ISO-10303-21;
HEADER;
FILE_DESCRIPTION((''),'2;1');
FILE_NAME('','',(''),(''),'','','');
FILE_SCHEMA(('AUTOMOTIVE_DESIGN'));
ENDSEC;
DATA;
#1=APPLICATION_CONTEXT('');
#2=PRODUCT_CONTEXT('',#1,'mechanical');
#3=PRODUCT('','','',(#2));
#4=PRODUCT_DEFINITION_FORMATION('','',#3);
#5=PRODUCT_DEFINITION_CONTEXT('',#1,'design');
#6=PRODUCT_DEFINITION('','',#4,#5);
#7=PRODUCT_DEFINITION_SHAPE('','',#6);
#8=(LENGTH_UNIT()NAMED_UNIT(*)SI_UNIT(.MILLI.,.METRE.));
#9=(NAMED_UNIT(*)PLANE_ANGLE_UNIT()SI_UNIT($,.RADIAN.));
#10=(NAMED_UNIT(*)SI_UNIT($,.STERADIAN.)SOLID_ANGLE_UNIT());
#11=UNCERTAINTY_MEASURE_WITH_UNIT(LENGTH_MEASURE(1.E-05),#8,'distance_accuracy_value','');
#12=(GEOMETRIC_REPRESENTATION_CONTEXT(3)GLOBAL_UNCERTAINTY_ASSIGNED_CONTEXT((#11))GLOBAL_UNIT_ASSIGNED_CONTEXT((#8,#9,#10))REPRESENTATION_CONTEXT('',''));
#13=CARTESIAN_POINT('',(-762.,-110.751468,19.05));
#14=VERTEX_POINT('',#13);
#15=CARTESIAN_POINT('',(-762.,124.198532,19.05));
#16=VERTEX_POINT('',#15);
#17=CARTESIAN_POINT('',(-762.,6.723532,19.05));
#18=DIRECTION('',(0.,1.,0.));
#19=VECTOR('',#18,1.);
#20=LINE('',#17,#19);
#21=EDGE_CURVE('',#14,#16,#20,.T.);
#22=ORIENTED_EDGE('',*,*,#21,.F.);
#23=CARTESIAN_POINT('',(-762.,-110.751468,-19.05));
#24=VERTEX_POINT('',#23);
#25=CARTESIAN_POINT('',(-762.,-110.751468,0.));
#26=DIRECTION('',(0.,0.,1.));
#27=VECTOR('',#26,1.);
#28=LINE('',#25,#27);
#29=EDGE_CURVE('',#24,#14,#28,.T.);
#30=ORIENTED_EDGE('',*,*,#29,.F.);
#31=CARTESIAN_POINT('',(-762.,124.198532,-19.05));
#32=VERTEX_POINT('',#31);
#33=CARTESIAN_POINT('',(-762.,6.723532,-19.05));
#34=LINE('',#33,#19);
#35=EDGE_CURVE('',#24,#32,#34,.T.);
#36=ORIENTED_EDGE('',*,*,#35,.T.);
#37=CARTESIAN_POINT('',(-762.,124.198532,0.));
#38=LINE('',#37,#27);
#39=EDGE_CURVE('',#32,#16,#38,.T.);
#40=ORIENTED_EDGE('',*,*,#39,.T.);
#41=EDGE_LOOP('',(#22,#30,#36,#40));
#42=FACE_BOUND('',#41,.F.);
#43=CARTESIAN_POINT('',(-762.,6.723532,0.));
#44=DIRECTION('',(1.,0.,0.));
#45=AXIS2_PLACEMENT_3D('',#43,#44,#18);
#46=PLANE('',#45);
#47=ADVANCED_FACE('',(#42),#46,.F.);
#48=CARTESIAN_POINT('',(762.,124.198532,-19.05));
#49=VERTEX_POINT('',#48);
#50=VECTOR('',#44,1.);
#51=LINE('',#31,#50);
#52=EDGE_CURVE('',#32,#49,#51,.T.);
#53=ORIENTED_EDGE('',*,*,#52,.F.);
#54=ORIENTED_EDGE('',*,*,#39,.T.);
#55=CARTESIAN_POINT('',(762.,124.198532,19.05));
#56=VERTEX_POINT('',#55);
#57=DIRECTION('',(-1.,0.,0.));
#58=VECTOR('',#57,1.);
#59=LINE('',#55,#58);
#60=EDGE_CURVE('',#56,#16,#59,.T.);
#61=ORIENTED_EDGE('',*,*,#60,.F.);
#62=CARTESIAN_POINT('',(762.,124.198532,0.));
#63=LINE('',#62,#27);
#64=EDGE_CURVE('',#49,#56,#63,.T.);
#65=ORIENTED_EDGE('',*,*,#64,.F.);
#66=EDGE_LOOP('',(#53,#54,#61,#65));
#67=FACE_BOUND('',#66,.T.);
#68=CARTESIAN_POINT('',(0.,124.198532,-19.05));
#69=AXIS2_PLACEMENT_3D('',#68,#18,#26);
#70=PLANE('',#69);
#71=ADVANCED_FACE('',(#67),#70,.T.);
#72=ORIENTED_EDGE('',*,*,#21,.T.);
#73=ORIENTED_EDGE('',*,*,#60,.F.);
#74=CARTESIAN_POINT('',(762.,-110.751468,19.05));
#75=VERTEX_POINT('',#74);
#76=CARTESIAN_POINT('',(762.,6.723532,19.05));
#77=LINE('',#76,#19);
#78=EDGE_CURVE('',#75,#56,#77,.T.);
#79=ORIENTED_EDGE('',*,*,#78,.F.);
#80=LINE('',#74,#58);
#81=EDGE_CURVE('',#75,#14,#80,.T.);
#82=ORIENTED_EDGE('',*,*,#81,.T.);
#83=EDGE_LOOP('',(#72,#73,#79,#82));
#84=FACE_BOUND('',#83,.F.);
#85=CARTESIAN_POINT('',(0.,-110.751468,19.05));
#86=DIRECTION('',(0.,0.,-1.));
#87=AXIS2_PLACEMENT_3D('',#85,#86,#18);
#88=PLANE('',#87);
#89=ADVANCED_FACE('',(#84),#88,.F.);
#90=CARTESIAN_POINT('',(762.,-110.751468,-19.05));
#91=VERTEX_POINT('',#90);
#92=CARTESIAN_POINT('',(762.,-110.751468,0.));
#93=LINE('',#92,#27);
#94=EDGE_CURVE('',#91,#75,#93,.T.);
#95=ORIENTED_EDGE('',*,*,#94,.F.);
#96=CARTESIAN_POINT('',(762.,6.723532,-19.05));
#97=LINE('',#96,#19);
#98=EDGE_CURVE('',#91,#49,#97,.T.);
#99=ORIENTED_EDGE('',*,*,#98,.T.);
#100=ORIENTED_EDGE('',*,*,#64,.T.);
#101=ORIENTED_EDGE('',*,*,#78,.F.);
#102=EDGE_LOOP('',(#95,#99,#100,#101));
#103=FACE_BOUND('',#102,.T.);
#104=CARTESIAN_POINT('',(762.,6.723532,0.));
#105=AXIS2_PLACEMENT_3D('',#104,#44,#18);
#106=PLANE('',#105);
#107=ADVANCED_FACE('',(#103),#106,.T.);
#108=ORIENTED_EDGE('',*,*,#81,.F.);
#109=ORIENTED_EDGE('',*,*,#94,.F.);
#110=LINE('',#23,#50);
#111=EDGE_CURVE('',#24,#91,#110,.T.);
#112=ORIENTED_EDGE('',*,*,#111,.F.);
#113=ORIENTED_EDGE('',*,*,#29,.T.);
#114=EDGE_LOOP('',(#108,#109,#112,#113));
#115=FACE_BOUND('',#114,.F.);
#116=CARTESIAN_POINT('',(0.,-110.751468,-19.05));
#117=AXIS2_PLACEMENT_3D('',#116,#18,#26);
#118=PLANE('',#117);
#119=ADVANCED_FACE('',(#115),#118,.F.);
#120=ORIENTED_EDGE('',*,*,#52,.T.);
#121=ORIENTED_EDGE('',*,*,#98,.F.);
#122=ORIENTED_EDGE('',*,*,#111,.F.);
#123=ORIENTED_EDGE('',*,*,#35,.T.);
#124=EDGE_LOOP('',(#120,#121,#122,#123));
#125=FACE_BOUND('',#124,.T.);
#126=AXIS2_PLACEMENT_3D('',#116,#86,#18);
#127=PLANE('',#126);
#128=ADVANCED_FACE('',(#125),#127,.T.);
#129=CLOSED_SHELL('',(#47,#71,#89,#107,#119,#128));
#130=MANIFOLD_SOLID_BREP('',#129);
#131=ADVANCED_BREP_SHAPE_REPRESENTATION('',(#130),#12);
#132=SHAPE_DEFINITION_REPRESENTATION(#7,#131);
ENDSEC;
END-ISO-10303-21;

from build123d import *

# Parameters (mm, degrees)
F1_W     = 234.95
F1_H     = 38.1
F2_DEPTH = 762


# Not quite as in the source:
# - a variable given as a bare number and used for a length is read in inches; the dataset says mm whatever the document's units were


with BuildPart() as f2:
    # F1 (on Right) → F2 (new body, symmetric)
    with BuildSketch(Plane.YZ):
        with Locations((6.7235322315, 0)):
            Rectangle(F1_W, F1_H)
    extrude(amount=F2_DEPTH, both=True)


solid = f2.part
